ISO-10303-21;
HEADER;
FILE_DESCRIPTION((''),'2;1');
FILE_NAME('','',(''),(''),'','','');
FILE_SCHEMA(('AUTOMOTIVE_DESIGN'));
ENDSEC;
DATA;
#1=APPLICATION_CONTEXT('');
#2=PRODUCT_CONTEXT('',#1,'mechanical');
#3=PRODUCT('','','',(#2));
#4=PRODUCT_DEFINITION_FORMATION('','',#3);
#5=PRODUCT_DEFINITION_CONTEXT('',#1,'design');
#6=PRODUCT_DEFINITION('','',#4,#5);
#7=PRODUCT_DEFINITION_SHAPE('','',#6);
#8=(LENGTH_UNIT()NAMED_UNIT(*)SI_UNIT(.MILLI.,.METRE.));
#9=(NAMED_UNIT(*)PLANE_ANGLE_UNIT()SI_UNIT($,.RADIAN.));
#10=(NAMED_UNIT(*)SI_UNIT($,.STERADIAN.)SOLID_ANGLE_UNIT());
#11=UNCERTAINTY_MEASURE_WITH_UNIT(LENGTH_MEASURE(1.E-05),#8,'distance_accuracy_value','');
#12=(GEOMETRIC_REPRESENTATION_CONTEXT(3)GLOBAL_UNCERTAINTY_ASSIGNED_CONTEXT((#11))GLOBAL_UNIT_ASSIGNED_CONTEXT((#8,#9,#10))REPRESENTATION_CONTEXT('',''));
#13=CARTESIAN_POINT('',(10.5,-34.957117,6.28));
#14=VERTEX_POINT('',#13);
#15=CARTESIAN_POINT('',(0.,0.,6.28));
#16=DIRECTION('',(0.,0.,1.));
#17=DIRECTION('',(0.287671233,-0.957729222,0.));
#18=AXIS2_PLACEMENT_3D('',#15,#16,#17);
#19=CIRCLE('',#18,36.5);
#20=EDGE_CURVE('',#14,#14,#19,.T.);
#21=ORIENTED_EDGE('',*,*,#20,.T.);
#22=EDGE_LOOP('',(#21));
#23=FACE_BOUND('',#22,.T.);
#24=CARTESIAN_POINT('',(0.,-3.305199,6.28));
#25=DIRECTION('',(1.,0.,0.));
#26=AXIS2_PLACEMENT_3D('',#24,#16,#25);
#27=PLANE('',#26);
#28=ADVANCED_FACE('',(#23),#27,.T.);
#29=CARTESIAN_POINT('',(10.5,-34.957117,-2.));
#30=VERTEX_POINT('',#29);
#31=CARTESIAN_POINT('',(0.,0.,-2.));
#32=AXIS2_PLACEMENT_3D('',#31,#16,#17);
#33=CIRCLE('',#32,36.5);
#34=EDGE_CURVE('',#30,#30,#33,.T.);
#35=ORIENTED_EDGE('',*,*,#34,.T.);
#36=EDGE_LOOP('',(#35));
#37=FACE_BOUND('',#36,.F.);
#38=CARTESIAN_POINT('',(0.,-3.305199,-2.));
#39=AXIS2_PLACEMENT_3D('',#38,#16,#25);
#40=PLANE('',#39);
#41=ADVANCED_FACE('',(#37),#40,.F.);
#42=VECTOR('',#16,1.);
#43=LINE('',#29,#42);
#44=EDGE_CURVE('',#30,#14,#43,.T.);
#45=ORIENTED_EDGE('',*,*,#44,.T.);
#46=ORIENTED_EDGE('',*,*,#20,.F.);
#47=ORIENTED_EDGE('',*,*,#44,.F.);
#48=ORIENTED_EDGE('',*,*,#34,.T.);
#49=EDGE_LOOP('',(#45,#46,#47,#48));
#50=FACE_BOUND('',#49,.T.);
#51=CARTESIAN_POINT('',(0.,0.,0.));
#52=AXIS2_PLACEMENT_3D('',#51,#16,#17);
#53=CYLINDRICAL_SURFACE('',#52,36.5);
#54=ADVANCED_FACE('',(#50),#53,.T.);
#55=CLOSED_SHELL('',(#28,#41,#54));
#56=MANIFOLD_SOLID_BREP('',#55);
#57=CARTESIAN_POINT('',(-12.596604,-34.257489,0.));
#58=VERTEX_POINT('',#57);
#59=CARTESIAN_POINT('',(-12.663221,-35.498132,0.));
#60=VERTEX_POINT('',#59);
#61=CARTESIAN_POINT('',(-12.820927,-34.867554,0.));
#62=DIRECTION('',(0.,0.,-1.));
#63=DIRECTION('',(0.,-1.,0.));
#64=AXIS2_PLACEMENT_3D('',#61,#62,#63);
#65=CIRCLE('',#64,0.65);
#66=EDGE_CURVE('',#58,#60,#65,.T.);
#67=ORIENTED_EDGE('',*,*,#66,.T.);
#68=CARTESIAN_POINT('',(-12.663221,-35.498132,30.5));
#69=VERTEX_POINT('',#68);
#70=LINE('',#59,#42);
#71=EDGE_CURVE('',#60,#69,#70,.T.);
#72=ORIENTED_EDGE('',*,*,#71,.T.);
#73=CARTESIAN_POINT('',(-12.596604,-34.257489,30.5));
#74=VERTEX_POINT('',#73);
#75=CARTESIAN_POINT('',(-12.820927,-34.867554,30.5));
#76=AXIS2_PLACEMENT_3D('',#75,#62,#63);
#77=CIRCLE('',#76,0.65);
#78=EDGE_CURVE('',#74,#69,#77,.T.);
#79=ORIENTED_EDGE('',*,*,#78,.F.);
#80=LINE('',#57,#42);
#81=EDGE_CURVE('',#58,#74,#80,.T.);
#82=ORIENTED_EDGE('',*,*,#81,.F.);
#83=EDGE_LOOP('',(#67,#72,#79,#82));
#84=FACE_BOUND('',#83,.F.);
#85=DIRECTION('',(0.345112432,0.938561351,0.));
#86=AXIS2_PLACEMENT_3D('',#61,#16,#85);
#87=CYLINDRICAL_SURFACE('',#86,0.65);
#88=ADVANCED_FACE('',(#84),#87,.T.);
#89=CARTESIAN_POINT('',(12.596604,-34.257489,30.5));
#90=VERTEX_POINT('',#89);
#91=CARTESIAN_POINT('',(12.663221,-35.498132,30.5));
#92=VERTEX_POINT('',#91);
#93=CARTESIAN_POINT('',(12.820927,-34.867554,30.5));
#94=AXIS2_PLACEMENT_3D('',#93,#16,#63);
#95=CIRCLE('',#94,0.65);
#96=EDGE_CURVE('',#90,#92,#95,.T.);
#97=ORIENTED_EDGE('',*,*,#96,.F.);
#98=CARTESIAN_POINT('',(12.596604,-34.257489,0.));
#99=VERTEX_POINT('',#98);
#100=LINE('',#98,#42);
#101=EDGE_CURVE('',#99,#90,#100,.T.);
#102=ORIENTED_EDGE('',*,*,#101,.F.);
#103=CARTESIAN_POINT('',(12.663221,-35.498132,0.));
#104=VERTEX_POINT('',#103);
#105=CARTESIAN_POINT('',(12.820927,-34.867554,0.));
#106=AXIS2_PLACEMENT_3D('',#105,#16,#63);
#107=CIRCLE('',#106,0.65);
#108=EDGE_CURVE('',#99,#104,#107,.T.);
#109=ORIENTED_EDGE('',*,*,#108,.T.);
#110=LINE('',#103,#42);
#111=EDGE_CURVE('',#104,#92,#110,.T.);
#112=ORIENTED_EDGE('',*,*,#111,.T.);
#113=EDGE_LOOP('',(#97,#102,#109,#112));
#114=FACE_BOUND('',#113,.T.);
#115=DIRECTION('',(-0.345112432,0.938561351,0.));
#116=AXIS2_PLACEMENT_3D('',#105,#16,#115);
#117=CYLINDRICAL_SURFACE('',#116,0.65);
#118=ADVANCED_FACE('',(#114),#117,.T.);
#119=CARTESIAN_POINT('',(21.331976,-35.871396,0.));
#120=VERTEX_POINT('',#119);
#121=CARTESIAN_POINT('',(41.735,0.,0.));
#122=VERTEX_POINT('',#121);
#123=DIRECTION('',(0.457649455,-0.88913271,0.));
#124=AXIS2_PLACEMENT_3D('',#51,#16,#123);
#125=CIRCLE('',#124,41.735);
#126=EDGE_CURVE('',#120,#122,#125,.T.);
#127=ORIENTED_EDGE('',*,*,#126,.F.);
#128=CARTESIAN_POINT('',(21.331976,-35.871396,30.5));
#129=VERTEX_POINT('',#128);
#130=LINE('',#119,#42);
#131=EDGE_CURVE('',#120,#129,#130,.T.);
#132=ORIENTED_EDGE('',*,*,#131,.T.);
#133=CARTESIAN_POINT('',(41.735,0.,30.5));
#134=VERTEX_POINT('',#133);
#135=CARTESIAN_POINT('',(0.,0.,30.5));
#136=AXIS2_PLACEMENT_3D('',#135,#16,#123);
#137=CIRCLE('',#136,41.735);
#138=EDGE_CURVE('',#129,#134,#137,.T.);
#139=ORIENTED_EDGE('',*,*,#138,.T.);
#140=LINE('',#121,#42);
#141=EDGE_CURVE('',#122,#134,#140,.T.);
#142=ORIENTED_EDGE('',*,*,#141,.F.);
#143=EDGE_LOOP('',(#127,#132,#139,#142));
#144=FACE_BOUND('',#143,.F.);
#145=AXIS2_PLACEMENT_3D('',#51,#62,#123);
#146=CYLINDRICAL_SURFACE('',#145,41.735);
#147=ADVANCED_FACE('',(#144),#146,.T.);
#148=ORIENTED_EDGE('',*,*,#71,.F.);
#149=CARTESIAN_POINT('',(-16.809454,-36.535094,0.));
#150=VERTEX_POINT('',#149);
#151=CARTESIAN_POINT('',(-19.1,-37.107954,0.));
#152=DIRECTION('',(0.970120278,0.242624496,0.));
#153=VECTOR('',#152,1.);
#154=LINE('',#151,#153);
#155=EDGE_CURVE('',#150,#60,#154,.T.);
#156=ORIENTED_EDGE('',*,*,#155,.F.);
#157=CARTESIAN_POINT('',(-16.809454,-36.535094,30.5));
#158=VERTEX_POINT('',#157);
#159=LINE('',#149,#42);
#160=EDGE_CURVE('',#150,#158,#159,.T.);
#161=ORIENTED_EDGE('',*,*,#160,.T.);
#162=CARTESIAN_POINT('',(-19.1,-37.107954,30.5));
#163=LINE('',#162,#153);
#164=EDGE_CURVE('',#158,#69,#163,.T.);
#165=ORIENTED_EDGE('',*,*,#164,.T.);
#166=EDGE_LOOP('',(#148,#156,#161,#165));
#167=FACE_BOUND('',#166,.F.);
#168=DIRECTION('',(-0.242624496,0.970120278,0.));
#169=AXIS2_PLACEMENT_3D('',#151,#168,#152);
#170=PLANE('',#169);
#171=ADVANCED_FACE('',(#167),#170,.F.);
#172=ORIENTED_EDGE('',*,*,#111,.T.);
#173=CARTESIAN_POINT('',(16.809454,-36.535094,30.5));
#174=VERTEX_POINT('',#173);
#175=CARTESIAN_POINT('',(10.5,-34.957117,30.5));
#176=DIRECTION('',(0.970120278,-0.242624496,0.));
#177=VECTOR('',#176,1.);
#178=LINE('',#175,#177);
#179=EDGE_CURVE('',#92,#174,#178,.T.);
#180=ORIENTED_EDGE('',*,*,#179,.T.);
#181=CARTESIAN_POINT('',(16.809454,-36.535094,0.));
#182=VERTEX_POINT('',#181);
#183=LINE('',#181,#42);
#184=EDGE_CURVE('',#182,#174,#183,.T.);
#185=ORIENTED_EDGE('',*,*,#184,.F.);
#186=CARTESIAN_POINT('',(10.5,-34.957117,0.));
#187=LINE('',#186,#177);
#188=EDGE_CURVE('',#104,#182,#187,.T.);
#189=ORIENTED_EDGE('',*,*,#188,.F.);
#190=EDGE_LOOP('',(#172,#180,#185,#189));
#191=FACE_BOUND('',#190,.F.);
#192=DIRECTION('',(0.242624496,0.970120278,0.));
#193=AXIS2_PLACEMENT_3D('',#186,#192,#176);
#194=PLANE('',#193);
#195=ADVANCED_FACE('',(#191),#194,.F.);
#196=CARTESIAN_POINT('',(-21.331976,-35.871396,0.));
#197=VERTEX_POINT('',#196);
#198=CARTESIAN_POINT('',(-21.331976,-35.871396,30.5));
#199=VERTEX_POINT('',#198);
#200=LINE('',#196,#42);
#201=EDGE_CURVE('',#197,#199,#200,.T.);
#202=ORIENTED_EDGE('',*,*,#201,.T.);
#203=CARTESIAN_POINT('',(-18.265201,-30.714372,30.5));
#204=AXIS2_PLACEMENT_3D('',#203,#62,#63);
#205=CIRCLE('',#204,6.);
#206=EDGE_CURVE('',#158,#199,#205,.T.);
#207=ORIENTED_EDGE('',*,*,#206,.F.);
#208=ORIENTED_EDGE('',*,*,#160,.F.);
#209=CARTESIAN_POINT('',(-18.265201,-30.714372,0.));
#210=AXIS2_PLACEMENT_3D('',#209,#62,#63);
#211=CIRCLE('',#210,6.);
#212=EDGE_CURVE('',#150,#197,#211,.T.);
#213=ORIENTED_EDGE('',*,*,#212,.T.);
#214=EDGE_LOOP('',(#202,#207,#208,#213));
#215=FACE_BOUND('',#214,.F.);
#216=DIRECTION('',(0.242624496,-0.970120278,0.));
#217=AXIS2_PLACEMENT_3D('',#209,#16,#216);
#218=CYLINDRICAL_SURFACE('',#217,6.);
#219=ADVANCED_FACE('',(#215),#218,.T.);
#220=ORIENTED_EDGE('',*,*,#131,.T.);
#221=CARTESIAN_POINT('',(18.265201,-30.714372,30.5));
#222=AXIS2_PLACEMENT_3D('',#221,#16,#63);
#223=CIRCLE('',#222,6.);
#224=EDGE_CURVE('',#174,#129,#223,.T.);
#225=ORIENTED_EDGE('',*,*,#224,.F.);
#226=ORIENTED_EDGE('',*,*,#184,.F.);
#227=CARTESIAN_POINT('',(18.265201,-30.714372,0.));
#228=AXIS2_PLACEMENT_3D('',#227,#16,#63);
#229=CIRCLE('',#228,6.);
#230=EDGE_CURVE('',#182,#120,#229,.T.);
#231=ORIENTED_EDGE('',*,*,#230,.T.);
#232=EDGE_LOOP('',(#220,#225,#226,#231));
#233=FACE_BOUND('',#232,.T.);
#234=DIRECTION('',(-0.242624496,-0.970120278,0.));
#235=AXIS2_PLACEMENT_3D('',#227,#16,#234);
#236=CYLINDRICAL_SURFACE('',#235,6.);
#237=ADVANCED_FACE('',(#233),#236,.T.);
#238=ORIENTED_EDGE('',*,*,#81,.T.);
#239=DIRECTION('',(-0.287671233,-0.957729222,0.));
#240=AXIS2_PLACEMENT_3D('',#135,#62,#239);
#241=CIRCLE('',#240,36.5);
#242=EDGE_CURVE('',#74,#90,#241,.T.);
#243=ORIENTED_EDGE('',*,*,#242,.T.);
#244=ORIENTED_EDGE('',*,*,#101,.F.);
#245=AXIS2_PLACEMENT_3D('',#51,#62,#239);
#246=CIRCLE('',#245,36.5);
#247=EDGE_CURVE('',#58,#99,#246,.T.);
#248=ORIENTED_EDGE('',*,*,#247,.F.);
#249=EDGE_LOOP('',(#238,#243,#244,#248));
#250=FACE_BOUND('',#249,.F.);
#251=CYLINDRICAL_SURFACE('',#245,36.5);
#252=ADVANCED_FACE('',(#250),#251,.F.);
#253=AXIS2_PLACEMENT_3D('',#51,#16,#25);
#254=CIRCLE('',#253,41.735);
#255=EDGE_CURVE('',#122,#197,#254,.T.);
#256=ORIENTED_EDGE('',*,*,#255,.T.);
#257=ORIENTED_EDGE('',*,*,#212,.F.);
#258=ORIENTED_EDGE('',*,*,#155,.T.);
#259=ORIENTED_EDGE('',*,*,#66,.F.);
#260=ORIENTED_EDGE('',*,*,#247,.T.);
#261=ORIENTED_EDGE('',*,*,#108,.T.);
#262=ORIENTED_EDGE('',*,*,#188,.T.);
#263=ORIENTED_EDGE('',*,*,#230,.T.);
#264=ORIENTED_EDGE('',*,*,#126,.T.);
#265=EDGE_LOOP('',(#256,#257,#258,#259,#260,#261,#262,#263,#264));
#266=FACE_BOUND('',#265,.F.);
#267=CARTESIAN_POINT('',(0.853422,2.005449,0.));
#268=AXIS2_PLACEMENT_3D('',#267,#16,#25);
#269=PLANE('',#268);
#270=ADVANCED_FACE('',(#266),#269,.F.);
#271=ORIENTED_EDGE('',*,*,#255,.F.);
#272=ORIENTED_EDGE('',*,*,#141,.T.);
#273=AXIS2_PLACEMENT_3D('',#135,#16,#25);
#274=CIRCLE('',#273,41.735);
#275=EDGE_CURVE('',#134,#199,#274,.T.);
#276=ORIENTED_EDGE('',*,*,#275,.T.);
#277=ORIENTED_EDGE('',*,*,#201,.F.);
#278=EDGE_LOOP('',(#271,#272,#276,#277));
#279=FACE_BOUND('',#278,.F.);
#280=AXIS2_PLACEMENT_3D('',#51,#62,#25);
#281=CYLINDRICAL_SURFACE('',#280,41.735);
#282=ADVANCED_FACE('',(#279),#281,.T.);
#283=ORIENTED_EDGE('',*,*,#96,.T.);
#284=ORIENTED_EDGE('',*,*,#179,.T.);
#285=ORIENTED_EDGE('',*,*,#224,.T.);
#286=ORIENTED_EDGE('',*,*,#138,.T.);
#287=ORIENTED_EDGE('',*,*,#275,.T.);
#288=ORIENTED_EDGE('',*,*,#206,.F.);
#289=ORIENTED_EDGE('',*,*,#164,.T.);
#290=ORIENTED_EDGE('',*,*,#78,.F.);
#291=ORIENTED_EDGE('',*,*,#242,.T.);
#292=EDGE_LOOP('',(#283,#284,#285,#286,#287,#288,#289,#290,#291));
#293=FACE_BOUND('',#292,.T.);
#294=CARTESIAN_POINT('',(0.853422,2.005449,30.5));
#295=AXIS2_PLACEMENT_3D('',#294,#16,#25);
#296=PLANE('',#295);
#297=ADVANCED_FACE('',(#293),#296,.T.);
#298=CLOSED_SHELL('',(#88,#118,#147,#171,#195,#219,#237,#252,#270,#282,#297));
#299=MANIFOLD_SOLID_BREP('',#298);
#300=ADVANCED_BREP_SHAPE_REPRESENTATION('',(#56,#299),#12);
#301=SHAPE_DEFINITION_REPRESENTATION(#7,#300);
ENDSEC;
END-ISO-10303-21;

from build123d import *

# Parameters (mm, degrees)
F1_DEPTH = 30.5
F2_F1_R  = 0.65
F2_F2_R  = 0.65
F3_R     = 6
F4_DEPTH = 6.28
F5_DEPTH = 2


with BuildPart() as f1:
    # F0 (on Top) → F1 (new body)
    with BuildSketch(Plane.XY):
        with BuildLine():
            ThreePointArc((19.1, -37.1079536623), (35.6296837272, -21.7332892701), (41.735, 0))
            ThreePointArc((41.735, 0), (-21.7332892701, 35.6296837272), (-19.1, -37.1079536623))
            Line((-19.1, -37.1079536623), (-10.5, -34.9571165859))
            ThreePointArc((-10.5, -34.9571165859), (-21.7830209108, 29.2873692912), (36.5, 0))
            ThreePointArc((36.5, 0), (29.2873692912, -21.7830209108), (10.5, -34.9571165859))
            Line((10.5, -34.9571165859), (19.1, -37.1079536623))
        make_face()
    extrude(amount=F1_DEPTH)

    # F2: fillet of radius 0.65 on 2 edges, made by hand

    # F2_f1
    f2_f1_edges = [f1.edges().sort_by_distance(p)[0] for p in [
        (10.5, -34.9571165859, 15.25),
    ]]
    fillet(f2_f1_edges, radius=F2_F1_R)

    # F2_f2
    f2_f2_edges = [f1.edges().sort_by_distance(p)[0] for p in [
        (-10.5, -34.9571165859, 15.25),
    ]]
    fillet(f2_f2_edges, radius=F2_F2_R)

    # F3
    f3_edges = [f1.edges().sort_by_distance(p)[0] for p in [
        (-19.1, -37.107954, 15.25),
        (19.1, -37.107954, 15.25),
    ]]
    fillet(f3_edges, radius=F3_R)


with BuildPart() as f4:
    # F0 (on Top) → F4 (new body)
    with BuildSketch(Plane.XY):
        with BuildLine():
            ThreePointArc((36.5, 0), (-21.7830209108, 29.2873692912), (-10.5, -34.9571165859))
            Line((-10.5, -34.9571165859), (0, 0))
            Line((0, 0), (10.5, -34.9571165859))
            ThreePointArc((10.5, -34.9571165859), (29.2873692912, -21.7830209108), (36.5, 0))
        make_face()
        with BuildLine():
            Line((0, 0), (-10.5, -34.9571165859))
            ThreePointArc((-10.5, -34.9571165859), (0, -36.5), (10.5, -34.9571165859))
            Line((10.5, -34.9571165859), (0, 0))
        make_face()
    extrude(amount=F4_DEPTH)

    # F5 (add): a face of the model
    f5_faces = [f4.faces().sort_by_distance(p)[0] for p in [
        (0, 0, 0),
    ]]
    extrude(f5_faces, amount=F5_DEPTH)


solid = Compound([f1.part, f4.part])
